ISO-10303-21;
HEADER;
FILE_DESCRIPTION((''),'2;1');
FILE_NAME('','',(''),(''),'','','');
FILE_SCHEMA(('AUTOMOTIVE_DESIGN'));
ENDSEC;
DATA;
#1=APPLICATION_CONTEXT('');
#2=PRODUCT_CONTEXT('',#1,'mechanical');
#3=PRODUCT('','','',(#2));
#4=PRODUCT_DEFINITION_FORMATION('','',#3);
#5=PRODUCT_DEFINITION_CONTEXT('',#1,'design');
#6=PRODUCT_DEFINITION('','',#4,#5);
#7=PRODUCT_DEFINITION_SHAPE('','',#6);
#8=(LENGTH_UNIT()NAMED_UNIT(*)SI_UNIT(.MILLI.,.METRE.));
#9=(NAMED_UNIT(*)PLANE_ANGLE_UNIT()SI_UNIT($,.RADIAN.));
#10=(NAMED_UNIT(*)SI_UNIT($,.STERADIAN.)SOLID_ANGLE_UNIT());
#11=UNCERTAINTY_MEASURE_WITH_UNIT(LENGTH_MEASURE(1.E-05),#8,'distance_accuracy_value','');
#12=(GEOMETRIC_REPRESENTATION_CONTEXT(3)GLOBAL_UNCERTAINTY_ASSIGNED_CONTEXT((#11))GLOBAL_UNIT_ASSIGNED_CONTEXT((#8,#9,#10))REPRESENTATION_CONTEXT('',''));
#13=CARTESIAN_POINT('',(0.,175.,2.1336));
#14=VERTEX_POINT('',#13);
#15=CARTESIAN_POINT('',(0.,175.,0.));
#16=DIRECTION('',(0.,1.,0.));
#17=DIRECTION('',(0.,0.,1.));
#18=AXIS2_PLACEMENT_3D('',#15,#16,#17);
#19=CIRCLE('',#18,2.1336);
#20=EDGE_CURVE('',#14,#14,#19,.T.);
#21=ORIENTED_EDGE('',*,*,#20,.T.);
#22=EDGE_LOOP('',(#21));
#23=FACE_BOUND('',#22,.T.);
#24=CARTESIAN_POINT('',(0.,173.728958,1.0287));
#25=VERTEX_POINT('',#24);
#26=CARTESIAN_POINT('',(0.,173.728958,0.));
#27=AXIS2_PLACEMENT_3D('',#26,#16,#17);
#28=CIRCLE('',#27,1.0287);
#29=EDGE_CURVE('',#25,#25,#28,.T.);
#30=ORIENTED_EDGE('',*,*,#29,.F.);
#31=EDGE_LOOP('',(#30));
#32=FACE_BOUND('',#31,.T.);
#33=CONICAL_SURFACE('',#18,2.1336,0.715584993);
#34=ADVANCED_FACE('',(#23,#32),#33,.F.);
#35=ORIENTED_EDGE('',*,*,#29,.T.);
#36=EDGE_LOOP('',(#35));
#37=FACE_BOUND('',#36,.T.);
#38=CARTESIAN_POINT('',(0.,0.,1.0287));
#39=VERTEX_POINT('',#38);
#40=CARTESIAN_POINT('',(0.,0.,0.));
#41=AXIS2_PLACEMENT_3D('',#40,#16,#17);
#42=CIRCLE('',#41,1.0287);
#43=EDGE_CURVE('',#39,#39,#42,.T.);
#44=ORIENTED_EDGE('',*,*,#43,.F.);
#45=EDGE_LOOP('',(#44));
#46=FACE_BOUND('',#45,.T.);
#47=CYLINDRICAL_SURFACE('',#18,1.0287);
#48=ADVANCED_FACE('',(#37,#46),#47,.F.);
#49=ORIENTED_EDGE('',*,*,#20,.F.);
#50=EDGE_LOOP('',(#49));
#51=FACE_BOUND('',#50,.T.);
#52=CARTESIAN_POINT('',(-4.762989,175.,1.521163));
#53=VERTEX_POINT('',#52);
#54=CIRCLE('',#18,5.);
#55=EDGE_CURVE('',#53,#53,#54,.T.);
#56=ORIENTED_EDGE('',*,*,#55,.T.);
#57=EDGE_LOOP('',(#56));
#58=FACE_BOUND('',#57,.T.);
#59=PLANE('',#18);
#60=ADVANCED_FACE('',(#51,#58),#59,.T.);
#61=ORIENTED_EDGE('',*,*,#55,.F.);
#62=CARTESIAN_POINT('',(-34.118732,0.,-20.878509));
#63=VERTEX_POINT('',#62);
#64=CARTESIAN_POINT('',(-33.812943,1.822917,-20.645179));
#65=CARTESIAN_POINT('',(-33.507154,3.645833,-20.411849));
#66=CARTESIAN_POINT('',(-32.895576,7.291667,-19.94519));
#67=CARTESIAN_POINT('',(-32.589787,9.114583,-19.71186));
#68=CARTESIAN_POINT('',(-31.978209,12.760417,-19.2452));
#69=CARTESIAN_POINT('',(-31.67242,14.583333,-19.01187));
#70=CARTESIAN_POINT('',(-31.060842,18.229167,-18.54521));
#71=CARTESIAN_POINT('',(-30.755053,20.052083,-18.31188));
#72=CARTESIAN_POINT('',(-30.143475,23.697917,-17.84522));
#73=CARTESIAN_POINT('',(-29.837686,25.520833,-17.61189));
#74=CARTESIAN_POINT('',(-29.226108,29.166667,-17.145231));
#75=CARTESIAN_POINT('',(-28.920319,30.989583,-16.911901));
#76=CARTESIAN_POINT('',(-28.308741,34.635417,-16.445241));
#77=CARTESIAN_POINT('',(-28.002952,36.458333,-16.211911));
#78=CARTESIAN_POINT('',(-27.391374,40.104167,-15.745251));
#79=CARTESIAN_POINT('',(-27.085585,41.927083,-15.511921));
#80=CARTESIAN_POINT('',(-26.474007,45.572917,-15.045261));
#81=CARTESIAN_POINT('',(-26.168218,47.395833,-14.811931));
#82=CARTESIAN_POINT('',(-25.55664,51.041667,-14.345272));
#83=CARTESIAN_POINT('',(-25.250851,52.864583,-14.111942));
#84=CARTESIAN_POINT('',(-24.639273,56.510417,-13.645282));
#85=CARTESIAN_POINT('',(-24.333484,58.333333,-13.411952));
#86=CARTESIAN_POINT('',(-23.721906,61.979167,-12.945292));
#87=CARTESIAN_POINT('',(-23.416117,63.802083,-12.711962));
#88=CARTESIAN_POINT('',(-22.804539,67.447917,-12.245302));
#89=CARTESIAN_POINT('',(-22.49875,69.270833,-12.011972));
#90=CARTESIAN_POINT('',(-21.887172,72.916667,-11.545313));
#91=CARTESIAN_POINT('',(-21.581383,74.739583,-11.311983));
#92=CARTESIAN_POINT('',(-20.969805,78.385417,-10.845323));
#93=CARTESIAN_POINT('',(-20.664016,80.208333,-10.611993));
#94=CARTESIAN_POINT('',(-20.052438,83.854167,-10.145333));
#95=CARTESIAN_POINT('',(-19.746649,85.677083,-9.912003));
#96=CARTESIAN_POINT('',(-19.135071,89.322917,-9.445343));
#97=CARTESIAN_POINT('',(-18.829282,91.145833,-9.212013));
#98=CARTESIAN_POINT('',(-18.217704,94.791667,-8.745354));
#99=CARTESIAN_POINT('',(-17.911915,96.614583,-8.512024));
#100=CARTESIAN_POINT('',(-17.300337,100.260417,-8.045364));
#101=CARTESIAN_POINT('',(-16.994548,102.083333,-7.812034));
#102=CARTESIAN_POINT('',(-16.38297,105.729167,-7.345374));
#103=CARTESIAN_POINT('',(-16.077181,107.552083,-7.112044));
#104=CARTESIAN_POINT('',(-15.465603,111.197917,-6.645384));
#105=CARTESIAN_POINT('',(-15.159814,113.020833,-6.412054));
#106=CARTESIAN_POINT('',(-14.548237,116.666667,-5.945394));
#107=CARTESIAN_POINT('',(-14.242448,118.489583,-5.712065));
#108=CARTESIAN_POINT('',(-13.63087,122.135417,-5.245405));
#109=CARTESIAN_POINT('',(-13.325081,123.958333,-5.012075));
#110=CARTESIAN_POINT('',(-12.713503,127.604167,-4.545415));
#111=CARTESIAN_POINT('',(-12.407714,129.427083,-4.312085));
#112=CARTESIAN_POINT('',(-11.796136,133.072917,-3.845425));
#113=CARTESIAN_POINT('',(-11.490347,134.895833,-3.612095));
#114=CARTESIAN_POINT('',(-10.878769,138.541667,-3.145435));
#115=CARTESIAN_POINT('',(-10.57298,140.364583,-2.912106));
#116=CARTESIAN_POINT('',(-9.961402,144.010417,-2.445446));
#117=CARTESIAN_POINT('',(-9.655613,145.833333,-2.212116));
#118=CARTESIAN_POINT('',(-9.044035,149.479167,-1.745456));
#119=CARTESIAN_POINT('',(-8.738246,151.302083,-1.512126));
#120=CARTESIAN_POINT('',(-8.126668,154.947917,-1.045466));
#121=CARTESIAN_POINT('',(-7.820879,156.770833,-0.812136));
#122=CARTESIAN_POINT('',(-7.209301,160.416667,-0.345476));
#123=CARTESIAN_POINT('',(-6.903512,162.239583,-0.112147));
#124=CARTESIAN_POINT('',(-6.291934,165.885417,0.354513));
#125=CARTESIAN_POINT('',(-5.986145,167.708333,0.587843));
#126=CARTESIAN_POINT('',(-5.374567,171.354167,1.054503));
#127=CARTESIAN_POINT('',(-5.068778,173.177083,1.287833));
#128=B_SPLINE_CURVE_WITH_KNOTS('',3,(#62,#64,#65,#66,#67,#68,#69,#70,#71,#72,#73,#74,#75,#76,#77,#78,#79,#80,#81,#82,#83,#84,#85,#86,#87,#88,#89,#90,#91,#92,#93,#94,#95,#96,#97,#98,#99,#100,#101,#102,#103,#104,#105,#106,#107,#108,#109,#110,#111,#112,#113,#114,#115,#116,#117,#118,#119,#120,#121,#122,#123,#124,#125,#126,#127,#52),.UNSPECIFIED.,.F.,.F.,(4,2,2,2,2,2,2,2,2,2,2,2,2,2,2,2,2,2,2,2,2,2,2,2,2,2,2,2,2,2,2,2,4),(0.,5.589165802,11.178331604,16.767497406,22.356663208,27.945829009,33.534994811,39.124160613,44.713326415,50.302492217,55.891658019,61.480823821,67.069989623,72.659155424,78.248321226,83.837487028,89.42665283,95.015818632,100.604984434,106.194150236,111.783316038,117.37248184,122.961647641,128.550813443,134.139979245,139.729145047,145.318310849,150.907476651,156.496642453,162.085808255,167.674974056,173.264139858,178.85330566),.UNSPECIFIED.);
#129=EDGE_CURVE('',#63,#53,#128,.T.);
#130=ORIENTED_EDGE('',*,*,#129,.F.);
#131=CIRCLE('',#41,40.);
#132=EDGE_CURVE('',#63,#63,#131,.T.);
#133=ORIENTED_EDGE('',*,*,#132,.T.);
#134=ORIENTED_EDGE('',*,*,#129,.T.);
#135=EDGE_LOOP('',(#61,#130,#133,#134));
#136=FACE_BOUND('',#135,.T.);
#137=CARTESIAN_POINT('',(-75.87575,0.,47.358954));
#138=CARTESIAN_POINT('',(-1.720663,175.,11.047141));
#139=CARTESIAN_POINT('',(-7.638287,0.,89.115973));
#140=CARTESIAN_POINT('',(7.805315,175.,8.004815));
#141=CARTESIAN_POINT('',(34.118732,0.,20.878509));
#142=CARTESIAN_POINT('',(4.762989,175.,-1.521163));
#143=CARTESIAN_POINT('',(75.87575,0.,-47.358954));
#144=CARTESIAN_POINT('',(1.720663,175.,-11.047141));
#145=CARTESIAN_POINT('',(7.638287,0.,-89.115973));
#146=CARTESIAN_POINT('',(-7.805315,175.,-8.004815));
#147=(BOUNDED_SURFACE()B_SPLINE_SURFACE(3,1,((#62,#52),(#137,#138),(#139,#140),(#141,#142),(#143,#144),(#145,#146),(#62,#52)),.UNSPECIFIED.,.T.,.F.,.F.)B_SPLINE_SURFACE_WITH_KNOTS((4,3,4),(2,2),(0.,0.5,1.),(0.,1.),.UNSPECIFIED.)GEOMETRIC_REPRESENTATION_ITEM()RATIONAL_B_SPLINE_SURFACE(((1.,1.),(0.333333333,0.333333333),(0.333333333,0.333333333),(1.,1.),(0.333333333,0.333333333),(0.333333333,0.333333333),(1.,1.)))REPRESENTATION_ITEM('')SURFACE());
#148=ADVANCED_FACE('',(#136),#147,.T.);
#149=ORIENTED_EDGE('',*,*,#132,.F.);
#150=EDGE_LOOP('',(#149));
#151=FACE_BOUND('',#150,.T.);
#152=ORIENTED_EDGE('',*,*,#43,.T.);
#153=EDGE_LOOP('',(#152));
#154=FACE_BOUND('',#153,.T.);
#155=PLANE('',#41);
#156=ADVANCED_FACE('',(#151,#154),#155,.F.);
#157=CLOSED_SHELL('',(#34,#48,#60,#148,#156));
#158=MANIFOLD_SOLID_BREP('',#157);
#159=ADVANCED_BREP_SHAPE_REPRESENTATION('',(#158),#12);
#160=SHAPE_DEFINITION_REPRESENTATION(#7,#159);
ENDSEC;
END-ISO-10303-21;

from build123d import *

# Parameters (mm, degrees)
CSK_FOR_1_FLAT_HEAD_SOCKET_CAP_SCREW1_D           = 2.0574
CSK_FOR_1_FLAT_HEAD_SOCKET_CAP_SCREW1_CSINK_D     = 4.2672
CSK_FOR_1_FLAT_HEAD_SOCKET_CAP_SCREW1_CSINK_ANGLE = 82


with BuildPart() as part:
    # Loft2: read off the stored shape, not the designer's step
    # Loft2: loft between two sections, ruled curve by curve
    loft2_from = [
        Edge.make_bspline([(-34.118731662, 0, -20.87850928), (-75.875750222, 0, 47.358954045), (-7.638286898, 0, 89.115972605), (34.118731662, 0, 20.87850928), (75.875750222, 0, -47.358954045), (7.638286898, 0, -89.115972605), (-34.118731662, 0, -20.87850928)], [0, 0, 0, 0, 0.5, 0.5, 0.5, 1, 1, 1, 1], 3, [1, 0.333333333, 0.333333333, 1, 0.333333333, 0.333333333, 1]),
    ]
    loft2_to = [
        Edge.make_bspline([(-4.762988919, 175, 1.521162896), (-1.720663127, 175, 11.047140734), (7.805314711, 175, 8.004814942), (4.762988919, 175, -1.521162896), (1.720663127, 175, -11.047140734), (-7.805314711, 175, -8.004814942), (-4.762988919, 175, 1.521162896)], [0, 0, 0, 0, 0.5, 0.5, 0.5, 1, 1, 1, 1], 3, [1, 0.333333333, 0.333333333, 1, 0.333333333, 0.333333333, 1]),
    ]
    loft2 = Solid(Shell([*[Face.make_surface_from_curves(loft2_from[k], loft2_to[k]) for k in range(1)], Face(Wire(loft2_from)), Face(Wire(loft2_to))]))
    add(loft2)

    # CSK for #1 Flat Head Socket Cap Screw1 (through all)
    with Locations(Plane(origin=(0, 175, 0), x_dir=(1, 0, 0), z_dir=(0, 1, 0))):
        with Locations((0, 0)):
            CounterSinkHole(CSK_FOR_1_FLAT_HEAD_SOCKET_CAP_SCREW1_D / 2, CSK_FOR_1_FLAT_HEAD_SOCKET_CAP_SCREW1_CSINK_D / 2, counter_sink_angle=CSK_FOR_1_FLAT_HEAD_SOCKET_CAP_SCREW1_CSINK_ANGLE)


solid = part.part
